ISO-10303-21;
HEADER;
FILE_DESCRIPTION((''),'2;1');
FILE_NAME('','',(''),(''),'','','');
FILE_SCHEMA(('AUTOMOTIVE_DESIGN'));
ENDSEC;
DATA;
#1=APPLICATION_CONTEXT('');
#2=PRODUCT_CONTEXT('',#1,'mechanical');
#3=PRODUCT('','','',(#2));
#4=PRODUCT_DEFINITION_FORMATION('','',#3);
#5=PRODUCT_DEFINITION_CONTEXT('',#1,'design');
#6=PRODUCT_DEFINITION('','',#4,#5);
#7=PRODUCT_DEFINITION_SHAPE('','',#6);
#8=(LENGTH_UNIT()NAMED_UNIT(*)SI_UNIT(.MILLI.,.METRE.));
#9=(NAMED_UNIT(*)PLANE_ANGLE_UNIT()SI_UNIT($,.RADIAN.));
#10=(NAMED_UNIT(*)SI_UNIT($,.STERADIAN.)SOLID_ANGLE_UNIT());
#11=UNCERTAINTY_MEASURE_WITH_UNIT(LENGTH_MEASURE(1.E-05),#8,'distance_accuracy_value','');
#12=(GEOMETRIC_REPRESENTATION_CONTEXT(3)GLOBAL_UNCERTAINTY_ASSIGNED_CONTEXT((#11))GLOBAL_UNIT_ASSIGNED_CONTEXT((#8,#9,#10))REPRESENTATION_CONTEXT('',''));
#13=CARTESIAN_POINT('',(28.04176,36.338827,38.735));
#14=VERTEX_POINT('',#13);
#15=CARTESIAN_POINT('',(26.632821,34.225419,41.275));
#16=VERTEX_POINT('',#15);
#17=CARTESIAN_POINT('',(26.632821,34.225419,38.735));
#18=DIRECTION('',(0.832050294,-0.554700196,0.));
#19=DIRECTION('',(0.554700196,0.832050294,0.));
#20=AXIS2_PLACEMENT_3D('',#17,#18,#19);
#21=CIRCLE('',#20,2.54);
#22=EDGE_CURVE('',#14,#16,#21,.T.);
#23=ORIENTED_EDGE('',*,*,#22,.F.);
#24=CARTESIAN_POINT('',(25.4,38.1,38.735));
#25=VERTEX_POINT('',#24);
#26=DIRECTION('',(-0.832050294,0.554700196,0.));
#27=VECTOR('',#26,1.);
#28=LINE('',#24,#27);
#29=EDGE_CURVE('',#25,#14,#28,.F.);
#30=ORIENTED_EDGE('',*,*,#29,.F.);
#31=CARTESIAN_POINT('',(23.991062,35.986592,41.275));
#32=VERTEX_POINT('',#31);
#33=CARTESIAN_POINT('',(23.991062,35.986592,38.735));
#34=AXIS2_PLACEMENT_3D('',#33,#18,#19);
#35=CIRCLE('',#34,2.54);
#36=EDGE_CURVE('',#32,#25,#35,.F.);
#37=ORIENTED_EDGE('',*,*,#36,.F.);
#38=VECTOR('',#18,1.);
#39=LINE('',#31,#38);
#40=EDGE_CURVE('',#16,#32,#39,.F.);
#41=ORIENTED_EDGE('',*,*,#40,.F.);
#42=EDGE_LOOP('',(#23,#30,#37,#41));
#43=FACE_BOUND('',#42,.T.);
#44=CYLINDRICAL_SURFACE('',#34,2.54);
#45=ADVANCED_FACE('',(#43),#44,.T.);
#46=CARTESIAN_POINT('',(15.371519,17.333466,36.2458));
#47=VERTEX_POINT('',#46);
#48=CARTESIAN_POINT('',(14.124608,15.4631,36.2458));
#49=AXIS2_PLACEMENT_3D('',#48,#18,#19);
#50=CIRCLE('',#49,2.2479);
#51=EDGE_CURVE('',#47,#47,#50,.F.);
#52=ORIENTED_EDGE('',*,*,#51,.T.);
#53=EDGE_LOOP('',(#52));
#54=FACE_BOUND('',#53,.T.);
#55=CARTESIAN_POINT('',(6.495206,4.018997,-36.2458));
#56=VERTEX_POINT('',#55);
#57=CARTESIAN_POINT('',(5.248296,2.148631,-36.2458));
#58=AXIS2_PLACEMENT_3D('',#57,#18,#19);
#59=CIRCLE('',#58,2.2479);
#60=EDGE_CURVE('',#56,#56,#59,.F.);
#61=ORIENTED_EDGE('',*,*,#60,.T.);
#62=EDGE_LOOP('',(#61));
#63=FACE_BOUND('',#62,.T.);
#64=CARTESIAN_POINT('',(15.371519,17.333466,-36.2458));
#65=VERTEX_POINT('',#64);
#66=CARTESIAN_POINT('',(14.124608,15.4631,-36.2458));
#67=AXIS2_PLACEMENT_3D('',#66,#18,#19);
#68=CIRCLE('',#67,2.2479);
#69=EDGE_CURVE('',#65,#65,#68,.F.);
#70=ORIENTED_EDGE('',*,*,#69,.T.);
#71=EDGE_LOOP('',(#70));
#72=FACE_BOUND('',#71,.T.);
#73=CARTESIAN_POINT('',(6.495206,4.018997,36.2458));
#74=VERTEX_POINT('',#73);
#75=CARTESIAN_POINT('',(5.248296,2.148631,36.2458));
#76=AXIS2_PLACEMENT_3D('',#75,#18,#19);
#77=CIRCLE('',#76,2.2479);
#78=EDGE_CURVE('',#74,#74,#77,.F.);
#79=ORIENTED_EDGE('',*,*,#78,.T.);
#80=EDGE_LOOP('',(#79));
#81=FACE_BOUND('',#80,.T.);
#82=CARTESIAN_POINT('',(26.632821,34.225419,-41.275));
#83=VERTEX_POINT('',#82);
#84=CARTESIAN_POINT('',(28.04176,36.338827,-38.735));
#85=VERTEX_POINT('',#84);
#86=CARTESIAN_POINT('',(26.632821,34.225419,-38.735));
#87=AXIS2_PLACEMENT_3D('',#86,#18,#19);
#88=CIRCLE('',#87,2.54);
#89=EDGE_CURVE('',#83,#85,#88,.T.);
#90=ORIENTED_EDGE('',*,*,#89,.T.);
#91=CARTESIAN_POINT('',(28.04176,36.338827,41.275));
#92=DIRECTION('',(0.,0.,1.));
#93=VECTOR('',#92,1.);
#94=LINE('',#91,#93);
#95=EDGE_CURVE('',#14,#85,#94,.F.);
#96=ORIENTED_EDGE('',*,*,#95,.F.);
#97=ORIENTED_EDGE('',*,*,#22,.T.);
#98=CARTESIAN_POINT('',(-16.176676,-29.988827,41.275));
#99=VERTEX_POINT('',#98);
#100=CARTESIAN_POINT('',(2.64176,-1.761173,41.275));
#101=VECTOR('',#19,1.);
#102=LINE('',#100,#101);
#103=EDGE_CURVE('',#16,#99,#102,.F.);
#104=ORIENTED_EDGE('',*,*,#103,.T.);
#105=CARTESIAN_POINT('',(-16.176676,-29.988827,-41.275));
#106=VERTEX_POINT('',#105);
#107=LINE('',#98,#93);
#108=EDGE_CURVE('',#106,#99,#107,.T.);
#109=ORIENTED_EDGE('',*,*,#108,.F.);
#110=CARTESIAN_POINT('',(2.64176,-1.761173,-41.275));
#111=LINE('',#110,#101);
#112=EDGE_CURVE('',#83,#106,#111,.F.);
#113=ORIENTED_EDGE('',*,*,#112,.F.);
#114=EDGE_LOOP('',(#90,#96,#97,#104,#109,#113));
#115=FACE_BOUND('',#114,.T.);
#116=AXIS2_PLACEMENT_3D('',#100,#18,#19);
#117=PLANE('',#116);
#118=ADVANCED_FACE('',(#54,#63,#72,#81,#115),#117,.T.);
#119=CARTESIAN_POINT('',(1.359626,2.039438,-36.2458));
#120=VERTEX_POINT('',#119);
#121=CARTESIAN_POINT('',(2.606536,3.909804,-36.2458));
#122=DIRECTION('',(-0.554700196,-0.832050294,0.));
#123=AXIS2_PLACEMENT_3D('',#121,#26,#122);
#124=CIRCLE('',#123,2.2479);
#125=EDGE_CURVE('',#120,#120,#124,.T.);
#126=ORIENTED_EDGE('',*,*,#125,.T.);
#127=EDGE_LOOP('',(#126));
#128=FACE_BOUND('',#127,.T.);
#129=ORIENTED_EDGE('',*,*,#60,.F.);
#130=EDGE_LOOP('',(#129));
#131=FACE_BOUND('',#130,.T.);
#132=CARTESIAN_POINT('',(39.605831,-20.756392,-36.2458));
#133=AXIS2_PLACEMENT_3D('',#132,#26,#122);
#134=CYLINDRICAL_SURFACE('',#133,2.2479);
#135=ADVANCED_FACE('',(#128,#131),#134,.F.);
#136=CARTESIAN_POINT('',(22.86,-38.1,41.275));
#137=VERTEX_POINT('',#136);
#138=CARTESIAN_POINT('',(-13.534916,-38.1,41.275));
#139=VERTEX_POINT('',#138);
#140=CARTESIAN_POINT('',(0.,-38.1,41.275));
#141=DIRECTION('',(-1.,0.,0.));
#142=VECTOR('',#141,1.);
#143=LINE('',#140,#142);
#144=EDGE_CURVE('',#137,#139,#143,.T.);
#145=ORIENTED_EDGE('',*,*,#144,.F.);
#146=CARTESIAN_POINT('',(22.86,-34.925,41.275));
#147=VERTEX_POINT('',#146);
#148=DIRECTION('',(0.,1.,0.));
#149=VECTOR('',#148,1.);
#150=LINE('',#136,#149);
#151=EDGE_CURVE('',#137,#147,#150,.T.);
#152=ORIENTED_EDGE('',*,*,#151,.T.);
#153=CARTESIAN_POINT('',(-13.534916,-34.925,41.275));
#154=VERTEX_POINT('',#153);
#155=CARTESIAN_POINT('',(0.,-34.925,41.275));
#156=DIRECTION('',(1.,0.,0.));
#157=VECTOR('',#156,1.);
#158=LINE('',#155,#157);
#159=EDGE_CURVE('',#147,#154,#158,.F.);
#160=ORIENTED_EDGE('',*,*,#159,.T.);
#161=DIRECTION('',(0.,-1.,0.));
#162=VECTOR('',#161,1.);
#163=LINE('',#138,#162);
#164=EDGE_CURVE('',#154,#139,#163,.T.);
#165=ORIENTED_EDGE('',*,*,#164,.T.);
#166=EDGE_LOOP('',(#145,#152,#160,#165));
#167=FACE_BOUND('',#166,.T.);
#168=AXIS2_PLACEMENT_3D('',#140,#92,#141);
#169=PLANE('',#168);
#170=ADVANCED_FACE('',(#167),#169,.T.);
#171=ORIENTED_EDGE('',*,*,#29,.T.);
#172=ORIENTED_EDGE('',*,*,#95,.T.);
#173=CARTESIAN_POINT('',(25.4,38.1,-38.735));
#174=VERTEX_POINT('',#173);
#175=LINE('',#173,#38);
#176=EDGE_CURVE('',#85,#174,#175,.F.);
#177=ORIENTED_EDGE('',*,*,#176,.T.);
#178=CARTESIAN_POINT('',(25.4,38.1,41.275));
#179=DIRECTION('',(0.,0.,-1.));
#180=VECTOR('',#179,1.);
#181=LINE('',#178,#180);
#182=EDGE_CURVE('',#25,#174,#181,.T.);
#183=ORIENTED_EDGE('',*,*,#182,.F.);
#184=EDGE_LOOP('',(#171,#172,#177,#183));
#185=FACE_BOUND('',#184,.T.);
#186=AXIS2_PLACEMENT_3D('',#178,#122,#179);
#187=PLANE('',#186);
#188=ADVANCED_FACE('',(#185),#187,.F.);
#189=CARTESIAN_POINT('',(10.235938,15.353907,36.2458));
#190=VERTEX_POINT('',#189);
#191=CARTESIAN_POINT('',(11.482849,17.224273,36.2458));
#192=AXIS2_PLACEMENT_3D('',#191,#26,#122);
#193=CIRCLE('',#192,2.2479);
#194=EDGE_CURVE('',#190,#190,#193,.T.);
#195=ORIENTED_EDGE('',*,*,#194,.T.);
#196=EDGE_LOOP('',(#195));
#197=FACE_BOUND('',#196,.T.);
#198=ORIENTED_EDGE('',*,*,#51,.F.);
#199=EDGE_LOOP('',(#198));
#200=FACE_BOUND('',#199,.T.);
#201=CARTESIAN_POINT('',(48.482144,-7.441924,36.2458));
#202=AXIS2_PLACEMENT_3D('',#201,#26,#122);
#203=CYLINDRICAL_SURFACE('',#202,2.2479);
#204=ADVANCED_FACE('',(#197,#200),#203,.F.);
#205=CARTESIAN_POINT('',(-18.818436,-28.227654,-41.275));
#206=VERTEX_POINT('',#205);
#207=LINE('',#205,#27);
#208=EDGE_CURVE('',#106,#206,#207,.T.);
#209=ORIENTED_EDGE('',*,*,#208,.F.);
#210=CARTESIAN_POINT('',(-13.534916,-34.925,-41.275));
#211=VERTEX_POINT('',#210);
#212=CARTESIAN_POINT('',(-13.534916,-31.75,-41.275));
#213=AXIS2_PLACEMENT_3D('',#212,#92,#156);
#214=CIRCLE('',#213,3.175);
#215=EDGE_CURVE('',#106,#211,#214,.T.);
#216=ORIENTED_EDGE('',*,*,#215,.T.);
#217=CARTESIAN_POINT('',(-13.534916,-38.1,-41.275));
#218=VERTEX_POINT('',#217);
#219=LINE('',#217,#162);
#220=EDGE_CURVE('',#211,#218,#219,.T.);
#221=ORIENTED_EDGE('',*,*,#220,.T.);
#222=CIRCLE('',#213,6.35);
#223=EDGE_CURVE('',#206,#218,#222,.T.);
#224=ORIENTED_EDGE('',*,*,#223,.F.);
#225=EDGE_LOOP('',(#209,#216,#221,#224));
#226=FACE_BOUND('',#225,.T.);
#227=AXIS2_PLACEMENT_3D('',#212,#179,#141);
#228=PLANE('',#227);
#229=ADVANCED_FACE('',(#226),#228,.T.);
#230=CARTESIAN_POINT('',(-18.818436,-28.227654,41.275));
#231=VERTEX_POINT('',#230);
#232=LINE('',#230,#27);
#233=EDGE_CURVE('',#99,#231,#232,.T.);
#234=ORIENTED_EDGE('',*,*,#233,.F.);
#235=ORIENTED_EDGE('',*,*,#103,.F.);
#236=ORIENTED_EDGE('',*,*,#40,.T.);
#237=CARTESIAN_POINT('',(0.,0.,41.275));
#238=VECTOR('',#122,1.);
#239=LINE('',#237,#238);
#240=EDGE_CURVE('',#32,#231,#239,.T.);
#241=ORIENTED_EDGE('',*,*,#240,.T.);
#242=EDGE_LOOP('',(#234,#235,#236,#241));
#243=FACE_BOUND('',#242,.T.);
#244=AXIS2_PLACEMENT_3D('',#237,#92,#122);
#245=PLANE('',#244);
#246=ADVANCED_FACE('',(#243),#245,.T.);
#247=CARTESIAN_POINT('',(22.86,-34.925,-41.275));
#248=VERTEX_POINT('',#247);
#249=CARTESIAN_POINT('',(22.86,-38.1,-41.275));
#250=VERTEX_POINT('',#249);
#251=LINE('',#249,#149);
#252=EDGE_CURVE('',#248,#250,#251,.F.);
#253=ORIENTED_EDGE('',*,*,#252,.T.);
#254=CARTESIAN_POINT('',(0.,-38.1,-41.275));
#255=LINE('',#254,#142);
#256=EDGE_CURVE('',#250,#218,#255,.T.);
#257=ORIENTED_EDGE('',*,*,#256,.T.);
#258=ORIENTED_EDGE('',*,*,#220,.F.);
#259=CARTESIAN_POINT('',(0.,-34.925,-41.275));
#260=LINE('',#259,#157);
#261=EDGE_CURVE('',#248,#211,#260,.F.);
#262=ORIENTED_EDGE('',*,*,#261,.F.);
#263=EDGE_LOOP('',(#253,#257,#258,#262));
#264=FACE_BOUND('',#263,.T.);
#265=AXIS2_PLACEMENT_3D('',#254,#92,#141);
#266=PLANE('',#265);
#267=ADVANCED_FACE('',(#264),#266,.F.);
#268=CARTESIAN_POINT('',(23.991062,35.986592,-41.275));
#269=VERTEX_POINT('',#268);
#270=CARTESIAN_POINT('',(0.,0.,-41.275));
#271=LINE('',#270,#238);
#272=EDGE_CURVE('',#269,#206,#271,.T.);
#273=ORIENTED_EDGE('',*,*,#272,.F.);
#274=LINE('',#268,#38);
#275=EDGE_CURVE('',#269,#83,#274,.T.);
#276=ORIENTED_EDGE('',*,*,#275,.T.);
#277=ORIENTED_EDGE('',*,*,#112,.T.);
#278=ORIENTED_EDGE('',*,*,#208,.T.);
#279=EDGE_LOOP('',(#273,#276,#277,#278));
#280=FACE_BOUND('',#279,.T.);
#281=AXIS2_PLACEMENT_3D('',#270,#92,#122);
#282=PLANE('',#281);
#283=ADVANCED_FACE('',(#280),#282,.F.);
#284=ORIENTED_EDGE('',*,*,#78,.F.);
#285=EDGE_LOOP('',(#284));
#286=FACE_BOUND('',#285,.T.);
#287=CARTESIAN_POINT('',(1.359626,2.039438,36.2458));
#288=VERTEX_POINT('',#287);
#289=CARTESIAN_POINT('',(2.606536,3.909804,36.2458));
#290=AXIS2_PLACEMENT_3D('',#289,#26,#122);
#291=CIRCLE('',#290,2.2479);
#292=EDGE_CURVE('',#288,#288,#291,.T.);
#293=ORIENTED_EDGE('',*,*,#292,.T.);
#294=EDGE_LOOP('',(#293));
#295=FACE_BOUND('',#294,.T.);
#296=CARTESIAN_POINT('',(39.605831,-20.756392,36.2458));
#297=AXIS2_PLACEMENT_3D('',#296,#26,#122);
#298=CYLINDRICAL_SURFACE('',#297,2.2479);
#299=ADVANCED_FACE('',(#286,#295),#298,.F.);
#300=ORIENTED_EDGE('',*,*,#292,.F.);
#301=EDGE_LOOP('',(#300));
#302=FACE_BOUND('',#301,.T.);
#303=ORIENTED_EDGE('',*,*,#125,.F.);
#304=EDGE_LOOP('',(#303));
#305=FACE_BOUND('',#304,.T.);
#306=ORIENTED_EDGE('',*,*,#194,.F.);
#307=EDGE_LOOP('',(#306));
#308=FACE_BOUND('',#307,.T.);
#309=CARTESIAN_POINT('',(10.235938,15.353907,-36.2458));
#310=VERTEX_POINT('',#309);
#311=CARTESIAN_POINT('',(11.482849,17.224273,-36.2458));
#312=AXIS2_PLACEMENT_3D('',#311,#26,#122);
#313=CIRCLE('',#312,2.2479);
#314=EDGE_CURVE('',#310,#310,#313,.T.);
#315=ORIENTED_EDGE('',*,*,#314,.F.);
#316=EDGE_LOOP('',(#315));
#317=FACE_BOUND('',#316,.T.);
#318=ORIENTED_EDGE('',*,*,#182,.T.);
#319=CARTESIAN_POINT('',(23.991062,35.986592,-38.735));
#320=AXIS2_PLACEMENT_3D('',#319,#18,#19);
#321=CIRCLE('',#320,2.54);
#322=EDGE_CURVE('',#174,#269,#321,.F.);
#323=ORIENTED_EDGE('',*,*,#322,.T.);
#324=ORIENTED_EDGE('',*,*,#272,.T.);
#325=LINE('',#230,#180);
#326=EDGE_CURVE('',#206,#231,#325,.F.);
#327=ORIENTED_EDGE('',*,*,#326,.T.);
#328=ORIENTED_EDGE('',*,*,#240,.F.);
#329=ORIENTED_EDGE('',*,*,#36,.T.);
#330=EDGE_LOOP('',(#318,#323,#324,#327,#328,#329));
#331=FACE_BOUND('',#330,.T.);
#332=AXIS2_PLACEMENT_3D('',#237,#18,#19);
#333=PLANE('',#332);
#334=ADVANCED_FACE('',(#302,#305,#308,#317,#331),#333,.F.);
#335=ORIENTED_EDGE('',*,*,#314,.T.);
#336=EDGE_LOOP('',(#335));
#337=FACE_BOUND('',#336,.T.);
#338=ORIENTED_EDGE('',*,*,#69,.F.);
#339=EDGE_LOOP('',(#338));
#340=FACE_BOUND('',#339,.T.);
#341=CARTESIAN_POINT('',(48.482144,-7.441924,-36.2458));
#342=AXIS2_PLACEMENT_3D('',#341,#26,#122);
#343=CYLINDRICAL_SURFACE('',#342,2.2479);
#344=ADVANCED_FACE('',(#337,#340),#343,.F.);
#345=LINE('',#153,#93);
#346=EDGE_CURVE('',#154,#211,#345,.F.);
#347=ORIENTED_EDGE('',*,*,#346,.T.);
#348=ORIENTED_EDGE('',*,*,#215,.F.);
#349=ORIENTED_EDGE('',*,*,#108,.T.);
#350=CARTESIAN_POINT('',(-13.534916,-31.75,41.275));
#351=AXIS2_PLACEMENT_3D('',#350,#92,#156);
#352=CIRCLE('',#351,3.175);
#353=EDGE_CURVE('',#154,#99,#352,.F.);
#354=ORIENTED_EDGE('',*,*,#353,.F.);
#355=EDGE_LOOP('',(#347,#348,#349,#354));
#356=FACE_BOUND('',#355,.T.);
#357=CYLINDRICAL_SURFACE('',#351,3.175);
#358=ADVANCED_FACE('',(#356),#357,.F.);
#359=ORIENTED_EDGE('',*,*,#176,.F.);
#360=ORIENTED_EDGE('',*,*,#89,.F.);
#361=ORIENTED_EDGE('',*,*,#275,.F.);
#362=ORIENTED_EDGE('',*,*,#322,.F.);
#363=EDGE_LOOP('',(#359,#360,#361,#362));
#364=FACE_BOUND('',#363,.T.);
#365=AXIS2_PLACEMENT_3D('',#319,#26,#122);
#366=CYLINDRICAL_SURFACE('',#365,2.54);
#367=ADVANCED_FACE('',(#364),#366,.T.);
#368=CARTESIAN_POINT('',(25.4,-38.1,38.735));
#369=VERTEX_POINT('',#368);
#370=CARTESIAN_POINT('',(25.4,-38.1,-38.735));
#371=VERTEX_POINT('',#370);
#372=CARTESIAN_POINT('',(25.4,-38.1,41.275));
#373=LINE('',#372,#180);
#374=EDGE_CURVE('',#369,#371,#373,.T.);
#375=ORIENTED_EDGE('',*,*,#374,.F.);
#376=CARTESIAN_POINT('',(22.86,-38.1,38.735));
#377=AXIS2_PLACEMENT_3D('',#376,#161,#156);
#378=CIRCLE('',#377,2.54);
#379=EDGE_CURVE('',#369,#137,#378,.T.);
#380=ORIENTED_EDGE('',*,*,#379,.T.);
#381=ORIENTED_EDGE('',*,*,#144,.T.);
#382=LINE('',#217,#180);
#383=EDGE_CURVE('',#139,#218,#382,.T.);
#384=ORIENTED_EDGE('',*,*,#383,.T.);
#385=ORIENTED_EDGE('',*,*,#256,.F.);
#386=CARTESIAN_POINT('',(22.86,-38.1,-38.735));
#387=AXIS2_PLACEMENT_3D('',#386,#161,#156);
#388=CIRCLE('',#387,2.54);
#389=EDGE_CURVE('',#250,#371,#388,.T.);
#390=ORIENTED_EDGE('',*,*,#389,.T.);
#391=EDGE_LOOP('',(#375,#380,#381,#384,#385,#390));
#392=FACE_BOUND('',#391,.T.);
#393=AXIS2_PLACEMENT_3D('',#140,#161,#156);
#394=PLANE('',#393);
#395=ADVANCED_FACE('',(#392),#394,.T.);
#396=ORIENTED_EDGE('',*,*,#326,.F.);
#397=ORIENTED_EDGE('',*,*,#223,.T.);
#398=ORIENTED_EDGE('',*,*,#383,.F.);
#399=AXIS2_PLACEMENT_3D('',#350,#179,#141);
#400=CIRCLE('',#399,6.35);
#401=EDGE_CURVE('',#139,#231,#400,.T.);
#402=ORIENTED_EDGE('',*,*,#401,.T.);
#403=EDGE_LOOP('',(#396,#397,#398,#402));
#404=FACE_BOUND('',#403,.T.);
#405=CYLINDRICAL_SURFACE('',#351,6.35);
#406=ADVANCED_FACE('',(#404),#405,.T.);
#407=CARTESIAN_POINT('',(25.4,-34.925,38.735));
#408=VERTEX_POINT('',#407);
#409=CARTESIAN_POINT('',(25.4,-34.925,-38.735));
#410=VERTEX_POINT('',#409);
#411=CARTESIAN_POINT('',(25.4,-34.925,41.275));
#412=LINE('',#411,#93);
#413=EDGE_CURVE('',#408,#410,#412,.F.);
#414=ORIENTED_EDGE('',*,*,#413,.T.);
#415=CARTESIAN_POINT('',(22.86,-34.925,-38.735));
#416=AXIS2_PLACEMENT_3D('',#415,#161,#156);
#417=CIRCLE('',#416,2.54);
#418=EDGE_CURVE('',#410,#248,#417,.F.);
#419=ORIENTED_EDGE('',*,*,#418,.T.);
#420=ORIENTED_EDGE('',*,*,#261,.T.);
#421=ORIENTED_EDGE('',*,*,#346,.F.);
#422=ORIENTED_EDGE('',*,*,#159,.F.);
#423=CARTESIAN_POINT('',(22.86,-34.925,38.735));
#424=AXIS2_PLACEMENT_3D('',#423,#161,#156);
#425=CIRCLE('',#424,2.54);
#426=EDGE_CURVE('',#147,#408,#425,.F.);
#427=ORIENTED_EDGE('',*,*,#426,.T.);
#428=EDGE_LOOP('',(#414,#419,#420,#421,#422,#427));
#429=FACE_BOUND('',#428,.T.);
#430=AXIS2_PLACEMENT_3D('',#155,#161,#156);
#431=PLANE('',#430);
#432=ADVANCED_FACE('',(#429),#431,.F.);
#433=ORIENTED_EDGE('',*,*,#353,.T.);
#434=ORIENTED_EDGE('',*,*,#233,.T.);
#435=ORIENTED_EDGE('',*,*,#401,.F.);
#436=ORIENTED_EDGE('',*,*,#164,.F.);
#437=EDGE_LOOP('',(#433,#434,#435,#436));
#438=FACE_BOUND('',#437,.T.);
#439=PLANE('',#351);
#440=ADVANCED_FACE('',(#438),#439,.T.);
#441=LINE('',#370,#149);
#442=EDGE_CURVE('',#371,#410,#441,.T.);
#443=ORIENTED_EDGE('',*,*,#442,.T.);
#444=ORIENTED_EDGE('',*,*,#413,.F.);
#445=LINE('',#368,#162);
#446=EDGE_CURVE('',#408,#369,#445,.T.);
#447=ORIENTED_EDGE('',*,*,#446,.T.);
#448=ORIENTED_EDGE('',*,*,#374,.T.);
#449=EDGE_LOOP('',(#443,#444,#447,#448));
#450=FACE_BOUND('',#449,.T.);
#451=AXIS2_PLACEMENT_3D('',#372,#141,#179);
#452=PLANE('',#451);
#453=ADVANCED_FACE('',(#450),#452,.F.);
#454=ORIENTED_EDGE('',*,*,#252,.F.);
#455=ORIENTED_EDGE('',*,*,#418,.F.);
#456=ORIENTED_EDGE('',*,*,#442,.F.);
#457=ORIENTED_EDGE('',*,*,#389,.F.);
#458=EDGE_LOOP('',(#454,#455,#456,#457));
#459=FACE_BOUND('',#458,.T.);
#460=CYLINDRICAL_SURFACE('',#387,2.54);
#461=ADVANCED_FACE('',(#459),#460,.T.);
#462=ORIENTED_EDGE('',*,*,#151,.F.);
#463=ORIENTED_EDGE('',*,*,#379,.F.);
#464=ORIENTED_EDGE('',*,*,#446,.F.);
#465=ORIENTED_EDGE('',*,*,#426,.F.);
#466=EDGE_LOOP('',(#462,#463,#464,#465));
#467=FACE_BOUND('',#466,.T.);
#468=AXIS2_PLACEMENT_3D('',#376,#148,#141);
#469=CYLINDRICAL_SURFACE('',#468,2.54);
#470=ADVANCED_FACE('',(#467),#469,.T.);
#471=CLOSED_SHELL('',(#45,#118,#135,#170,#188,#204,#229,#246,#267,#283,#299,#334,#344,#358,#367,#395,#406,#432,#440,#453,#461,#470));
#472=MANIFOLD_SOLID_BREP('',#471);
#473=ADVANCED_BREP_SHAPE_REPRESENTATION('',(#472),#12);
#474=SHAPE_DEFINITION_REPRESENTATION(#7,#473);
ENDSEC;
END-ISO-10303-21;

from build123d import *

# Parameters (mm, degrees)
BOSS_EXTRUDE1_DEPTH    = 41.275
CONVERT_SOLID1_START   = -41.275
CONVERT_SOLID1_DEPTH   = 82.55
CONVERT_SOLID1_2_DEPTH = 82.55
CUT_EXTRUDE1_REACH     = 64.782
SKETCH6_R              = 2.2479
FILLET1_R              = 2.54


# Read off the part's stored shape, not the designer's step: Convert-Solid1
with BuildPart() as part:
    # Sketch1 → Boss-Extrude1 (new, symmetric)
    with BuildSketch(Plane.XY):
        Polygon((25.4, -38.1), (-25.4, -38.1), (25.4, 38.1), align=None)
    extrude(amount=BOSS_EXTRUDE1_DEPTH, both=True)

    # Convert-Solid1 outline → Convert-Solid1 (cut)
    with BuildSketch(Plane.XY.offset(CONVERT_SOLID1_START)):
        with BuildLine():
            Line((25.4, -34.925), (25.4, 32.37618735))
            Line((25.4, 32.37618735), (-16.176676151, -29.988826877))
            ThreePointArc((-16.176676151, -29.988826877), (-16.334233318, -33.248148914), (-13.534916467, -34.925))
            Line((-13.534916467, -34.925), (25.4, -34.925))
        make_face()
        with BuildLine():
            ThreePointArc((-13.534916467, -38.1), (-19.133550169, -34.746297827), (-18.818435836, -28.227653754))
            Line((-18.818435836, -28.227653754), (-25.4, -38.1))
            Line((-25.4, -38.1), (-13.534916467, -38.1))
        make_face()
    extrude(amount=CONVERT_SOLID1_DEPTH, mode=Mode.SUBTRACT)

    # Convert-Solid1 2 outline → Convert-Solid1 2 (add)
    with BuildSketch(Plane.XY.offset(CONVERT_SOLID1_START)):
        Polygon((28.041759685, 36.338826877), (25.4, 38.1), (25.4, 32.37618735), align=None)
    extrude(amount=CONVERT_SOLID1_2_DEPTH)

    # Sketch6 → Cut-Extrude1 (cut, up to next)
    with BuildSketch(Plane(origin=(0, 0, 0), x_dir=(0, 0, 1), z_dir=(-0.8320502943378438, 0.554700196225229, 0)), mode=Mode.PRIVATE) as cut_extrude1_sk1:
        with Locations(Location((-36.2458, 20.701, 0), (0, 0, 270))):
            Circle(SKETCH6_R)
    cut_extrude1_tool1 = extrude(cut_extrude1_sk1.sketch, amount=-CUT_EXTRUDE1_REACH, mode=Mode.PRIVATE) & part.part
    # Sketch6 → Cut-Extrude1 (cut, up to next)
    with BuildSketch(Plane(origin=(0, 0, 0), x_dir=(0, 0, 1), z_dir=(-0.8320502943378438, 0.554700196225229, 0)), mode=Mode.PRIVATE) as cut_extrude1_sk2:
        with Locations(Location((36.2458, 20.701, 0), (0, 0, 270))):
            Circle(SKETCH6_R)
    cut_extrude1_tool2 = extrude(cut_extrude1_sk2.sketch, amount=-CUT_EXTRUDE1_REACH, mode=Mode.PRIVATE) & part.part
    # Sketch6 → Cut-Extrude1 (cut, up to next)
    with BuildSketch(Plane(origin=(0, 0, 0), x_dir=(0, 0, 1), z_dir=(-0.8320502943378438, 0.554700196225229, 0)), mode=Mode.PRIVATE) as cut_extrude1_sk3:
        with Locations(Location((-36.2458, 4.699, 0), (0, 0, 270))):
            Circle(SKETCH6_R)
    cut_extrude1_tool3 = extrude(cut_extrude1_sk3.sketch, amount=-CUT_EXTRUDE1_REACH, mode=Mode.PRIVATE) & part.part
    # Sketch6 → Cut-Extrude1 (cut, up to next)
    with BuildSketch(Plane(origin=(0, 0, 0), x_dir=(0, 0, 1), z_dir=(-0.8320502943378438, 0.554700196225229, 0)), mode=Mode.PRIVATE) as cut_extrude1_sk4:
        with Locations(Location((36.2458, 4.699, 0), (0, 0, 270))):
            Circle(SKETCH6_R)
    cut_extrude1_tool4 = extrude(cut_extrude1_sk4.sketch, amount=-CUT_EXTRUDE1_REACH, mode=Mode.PRIVATE) & part.part
    add(cut_extrude1_tool1.solids().sort_by_distance((11.482849, 17.224273, -36.2458))[0], mode=Mode.SUBTRACT)
    add(cut_extrude1_tool2.solids().sort_by_distance((11.482849, 17.224273, 36.2458))[0], mode=Mode.SUBTRACT)
    add(cut_extrude1_tool3.solids().sort_by_distance((2.606536, 3.909804, -36.2458))[0], mode=Mode.SUBTRACT)
    add(cut_extrude1_tool4.solids().sort_by_distance((2.606536, 3.909804, 36.2458))[0], mode=Mode.SUBTRACT)

    # Fillet1
    fillet1_edges = [part.edges().sort_by_distance(p)[0] for p in [
        (26.720879842, 37.219413438, -41.275),
        (26.720879842, 37.219413438, 41.275),
        (25.4, -36.5125, 41.275),
        (25.4, -36.5125, -41.275),
    ]]
    fillet(fillet1_edges, radius=FILLET1_R)


solid = part.part
